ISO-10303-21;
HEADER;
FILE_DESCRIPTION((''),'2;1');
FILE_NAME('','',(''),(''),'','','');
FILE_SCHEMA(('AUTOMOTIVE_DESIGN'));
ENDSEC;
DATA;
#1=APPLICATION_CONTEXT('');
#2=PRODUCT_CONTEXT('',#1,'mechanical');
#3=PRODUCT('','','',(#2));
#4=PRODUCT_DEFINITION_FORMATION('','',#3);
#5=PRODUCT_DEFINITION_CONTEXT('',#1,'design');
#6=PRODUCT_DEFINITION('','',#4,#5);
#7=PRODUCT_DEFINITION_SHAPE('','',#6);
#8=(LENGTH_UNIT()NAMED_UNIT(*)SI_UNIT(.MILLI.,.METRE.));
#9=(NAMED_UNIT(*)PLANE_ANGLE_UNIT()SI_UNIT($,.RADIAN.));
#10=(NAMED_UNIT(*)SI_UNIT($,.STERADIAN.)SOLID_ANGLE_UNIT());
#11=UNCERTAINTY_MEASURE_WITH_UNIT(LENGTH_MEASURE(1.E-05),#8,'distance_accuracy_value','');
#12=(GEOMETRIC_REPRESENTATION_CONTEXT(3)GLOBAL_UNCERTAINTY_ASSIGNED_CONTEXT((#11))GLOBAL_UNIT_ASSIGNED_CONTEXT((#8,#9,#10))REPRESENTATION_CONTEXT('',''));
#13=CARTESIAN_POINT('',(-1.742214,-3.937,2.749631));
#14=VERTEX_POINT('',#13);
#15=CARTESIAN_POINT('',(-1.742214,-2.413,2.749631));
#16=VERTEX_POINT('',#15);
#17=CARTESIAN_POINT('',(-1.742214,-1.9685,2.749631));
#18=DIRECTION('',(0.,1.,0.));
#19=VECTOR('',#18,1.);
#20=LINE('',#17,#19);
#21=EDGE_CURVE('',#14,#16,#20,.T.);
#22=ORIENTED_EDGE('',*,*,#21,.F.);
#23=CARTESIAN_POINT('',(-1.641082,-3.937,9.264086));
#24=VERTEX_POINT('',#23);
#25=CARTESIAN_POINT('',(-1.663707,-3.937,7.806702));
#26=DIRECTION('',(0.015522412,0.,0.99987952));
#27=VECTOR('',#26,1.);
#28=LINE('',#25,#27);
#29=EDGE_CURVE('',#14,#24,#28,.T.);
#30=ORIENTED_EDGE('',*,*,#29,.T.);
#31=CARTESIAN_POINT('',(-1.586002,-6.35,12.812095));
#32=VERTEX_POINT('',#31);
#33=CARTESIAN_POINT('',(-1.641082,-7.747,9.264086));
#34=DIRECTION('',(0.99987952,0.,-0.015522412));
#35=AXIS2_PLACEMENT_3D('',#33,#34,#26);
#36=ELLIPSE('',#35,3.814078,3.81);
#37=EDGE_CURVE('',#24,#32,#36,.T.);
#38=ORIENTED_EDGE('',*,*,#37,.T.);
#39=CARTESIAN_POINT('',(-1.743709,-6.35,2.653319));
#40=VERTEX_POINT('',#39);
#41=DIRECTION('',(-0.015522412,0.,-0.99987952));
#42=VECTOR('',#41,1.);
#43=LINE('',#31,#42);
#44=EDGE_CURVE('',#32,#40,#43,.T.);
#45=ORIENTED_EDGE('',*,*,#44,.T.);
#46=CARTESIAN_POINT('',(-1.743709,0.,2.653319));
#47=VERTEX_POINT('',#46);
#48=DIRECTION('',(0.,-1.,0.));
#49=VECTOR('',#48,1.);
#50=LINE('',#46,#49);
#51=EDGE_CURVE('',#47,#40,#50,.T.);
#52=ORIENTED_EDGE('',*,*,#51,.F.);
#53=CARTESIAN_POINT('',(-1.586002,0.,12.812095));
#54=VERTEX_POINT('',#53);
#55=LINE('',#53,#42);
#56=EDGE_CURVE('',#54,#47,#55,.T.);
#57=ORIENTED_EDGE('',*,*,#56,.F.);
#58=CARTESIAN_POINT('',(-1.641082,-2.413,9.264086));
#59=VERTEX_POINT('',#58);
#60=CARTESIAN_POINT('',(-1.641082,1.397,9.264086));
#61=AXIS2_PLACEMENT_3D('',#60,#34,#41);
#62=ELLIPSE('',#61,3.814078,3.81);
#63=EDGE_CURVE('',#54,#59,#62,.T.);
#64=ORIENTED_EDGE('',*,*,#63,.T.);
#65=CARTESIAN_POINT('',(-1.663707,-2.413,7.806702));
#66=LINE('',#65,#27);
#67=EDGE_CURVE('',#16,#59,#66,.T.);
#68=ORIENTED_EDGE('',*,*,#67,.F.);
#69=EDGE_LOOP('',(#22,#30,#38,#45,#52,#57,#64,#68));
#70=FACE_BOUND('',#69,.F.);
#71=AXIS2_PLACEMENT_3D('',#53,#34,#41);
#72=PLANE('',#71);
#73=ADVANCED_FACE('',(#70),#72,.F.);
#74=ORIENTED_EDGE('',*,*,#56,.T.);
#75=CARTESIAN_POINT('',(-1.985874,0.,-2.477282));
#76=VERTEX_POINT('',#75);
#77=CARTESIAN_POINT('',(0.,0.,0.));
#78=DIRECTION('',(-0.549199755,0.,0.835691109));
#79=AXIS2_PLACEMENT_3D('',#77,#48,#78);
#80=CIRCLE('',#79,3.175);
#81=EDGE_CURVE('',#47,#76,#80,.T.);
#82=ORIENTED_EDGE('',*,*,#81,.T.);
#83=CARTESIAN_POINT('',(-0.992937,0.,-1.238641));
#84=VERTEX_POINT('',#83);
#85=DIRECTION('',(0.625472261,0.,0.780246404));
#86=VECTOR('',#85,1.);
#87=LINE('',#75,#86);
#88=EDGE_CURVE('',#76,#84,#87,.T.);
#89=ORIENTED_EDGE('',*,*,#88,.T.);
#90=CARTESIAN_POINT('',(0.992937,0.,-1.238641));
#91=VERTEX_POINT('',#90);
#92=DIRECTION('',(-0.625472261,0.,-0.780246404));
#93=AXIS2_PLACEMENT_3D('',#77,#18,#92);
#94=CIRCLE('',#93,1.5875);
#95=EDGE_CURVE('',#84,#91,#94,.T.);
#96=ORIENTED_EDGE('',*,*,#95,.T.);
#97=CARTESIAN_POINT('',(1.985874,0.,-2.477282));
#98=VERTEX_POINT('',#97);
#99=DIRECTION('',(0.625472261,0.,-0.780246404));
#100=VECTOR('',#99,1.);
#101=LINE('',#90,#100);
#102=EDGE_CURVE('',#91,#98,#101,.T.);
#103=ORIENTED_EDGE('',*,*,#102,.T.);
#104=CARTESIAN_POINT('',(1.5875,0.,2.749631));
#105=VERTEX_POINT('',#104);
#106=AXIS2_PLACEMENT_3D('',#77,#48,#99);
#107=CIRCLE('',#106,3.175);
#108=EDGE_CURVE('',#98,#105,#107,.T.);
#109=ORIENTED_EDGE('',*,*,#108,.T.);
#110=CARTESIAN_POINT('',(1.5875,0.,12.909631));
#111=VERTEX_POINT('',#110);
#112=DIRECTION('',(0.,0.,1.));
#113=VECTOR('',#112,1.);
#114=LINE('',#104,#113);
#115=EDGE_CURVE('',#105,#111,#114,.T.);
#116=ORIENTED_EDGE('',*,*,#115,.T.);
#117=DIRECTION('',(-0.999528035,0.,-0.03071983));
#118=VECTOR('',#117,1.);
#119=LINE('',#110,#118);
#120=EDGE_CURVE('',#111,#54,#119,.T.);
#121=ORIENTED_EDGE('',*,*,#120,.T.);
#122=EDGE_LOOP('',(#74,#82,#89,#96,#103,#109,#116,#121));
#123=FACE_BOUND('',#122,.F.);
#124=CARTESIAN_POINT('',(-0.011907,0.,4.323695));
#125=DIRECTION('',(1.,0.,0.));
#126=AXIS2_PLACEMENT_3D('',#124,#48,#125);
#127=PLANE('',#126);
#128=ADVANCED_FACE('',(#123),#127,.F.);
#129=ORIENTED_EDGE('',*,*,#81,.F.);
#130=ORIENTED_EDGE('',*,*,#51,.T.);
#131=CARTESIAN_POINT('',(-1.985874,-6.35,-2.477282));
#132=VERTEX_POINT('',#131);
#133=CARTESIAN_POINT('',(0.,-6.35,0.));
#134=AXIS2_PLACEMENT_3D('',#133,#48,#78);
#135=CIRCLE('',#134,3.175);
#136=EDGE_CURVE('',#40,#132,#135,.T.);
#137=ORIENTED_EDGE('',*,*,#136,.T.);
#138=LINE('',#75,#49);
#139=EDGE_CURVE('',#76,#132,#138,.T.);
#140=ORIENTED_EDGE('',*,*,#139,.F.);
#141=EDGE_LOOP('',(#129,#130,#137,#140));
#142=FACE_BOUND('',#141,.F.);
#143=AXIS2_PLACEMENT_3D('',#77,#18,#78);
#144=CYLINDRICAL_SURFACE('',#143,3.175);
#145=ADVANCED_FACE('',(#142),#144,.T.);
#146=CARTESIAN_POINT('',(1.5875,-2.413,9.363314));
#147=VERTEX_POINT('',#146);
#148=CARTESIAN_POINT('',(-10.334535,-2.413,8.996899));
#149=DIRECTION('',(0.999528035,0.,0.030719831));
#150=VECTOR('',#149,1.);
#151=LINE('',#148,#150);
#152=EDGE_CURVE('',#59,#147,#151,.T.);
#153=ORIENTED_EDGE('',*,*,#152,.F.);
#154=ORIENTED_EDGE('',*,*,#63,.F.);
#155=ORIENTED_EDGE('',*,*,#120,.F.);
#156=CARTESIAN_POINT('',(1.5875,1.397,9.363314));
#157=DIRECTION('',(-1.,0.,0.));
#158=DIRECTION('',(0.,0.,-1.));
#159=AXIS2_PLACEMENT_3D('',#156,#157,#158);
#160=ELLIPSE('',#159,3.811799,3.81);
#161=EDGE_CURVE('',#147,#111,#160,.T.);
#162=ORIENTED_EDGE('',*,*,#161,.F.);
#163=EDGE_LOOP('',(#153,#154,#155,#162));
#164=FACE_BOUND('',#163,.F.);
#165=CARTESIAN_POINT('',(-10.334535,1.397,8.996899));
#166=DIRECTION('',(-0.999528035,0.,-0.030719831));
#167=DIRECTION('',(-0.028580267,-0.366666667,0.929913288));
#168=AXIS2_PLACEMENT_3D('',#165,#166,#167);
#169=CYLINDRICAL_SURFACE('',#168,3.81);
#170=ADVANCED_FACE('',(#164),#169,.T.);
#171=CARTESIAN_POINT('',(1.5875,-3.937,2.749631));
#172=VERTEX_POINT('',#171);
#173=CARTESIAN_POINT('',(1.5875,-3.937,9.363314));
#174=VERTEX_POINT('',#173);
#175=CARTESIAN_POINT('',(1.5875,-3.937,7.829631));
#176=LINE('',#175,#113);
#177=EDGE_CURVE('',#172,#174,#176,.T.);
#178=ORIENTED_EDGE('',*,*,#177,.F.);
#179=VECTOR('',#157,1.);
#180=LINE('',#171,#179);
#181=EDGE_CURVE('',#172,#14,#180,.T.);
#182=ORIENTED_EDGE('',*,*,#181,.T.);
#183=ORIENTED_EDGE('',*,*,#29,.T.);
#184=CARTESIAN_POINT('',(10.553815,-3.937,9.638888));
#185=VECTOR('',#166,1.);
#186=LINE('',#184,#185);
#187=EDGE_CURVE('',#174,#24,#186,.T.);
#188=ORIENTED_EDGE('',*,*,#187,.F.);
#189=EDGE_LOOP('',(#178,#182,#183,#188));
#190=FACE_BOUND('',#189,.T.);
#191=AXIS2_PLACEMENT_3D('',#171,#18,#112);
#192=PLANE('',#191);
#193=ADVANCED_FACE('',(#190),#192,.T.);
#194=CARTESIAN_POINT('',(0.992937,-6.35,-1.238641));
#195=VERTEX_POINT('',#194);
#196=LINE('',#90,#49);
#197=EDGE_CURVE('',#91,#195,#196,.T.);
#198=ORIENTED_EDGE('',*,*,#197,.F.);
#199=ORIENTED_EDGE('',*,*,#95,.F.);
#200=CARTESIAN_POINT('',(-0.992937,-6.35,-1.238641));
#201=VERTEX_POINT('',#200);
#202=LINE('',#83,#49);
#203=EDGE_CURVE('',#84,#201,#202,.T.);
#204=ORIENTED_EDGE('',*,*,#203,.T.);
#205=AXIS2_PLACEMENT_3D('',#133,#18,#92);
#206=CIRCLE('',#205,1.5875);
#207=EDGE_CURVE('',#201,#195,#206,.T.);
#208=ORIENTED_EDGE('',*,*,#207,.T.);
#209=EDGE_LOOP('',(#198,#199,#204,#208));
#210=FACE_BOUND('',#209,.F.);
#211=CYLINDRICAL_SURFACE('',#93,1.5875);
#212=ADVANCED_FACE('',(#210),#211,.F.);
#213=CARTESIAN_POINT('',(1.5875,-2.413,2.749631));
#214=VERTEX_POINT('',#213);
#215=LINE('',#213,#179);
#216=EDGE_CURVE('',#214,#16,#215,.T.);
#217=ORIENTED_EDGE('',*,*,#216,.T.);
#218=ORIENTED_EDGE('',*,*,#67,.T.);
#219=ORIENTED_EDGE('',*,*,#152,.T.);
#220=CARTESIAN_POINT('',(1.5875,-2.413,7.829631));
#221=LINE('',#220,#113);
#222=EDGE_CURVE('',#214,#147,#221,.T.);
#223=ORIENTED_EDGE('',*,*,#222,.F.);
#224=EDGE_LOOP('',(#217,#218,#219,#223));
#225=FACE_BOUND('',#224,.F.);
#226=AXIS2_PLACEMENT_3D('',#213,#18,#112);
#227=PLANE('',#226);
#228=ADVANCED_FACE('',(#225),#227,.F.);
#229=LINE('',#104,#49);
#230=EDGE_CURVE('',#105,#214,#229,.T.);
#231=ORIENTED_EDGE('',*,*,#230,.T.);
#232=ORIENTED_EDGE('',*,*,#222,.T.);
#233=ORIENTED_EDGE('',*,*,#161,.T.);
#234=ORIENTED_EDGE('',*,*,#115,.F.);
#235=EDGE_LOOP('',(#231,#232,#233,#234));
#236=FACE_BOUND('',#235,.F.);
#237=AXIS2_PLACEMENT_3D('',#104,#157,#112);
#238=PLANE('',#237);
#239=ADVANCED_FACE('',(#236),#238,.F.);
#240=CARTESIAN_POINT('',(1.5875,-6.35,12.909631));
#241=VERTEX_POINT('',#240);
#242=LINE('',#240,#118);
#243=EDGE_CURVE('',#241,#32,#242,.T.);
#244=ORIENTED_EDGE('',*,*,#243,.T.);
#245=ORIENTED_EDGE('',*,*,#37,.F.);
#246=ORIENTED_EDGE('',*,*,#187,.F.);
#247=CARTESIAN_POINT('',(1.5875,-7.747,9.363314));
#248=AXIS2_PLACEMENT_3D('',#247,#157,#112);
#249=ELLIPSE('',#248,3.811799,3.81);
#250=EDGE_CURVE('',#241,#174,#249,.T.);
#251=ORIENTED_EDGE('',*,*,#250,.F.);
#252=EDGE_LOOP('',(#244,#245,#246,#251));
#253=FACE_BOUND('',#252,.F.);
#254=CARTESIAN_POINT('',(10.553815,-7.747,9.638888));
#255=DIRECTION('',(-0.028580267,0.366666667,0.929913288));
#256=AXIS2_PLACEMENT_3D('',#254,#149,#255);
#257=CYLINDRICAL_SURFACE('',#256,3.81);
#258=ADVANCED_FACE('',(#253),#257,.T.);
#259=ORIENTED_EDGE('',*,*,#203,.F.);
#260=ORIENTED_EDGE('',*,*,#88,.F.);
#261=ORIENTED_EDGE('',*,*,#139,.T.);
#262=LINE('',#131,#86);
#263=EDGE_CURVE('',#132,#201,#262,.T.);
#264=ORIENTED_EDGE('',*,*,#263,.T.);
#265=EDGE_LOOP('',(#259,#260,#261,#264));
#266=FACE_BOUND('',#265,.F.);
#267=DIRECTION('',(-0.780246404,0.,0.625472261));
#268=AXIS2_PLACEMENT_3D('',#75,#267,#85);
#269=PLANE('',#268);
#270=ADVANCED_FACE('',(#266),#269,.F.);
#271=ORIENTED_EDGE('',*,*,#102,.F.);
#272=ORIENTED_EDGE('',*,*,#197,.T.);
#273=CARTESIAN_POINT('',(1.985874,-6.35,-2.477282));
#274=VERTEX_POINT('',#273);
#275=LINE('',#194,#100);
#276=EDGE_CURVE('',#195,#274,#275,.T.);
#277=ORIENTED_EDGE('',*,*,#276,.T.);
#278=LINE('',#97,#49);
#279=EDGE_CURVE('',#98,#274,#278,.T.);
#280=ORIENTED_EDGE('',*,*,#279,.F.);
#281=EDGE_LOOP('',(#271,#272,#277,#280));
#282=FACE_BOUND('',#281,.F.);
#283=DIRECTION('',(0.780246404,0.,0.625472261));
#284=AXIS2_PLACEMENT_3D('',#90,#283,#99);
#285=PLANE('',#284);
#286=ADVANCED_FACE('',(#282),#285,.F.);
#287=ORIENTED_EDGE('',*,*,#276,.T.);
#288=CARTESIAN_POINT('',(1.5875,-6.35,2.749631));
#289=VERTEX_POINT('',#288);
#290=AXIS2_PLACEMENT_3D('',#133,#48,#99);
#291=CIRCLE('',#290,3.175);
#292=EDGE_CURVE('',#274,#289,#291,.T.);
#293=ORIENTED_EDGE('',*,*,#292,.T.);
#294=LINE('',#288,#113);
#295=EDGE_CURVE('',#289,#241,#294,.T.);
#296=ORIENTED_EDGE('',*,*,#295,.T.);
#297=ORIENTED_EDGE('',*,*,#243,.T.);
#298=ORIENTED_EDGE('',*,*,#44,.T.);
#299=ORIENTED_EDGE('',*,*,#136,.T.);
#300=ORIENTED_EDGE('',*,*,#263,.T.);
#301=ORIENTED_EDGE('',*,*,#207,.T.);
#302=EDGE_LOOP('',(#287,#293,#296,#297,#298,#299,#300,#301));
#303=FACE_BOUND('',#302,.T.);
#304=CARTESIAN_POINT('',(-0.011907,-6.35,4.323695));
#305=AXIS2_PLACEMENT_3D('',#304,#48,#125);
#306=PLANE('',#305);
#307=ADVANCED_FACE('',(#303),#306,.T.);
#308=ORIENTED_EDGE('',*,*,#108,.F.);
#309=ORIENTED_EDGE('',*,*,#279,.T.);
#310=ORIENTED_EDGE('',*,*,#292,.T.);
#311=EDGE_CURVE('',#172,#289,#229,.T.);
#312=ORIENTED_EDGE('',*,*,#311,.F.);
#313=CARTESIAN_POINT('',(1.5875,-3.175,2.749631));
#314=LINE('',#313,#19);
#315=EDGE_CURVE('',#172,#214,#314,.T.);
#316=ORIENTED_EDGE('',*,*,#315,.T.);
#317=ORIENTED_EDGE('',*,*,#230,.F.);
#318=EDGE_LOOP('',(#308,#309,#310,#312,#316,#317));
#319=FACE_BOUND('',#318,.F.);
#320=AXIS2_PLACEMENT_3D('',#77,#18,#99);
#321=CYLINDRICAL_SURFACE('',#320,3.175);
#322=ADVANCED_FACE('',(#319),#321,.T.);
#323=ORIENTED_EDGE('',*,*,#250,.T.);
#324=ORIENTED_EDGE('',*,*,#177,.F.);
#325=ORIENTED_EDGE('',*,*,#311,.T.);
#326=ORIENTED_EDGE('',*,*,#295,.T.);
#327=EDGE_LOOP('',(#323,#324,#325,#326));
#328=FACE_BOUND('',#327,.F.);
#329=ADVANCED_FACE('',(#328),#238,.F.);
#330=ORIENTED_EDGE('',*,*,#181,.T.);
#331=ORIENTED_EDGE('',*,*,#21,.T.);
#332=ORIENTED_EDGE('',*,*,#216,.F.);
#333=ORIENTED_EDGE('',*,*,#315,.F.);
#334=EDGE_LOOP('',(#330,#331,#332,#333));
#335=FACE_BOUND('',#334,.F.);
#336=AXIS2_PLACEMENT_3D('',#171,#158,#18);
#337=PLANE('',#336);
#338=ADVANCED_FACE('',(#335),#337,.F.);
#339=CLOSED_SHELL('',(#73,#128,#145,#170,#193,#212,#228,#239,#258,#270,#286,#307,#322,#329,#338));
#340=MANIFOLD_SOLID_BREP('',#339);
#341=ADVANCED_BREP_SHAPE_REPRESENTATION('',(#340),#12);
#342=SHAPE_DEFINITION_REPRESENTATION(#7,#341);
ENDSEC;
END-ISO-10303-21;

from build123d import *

# Parameters (mm, degrees)
F1_DEPTH    = 6.35
F2_W        = 1.524
F2_H        = 10.16
F3_DEPTH    = 25.4
F4_T1_DEPTH = 20.8982128859
F5_T1_DEPTH = 20.8982128859


# Not quite as in the source:
# - a fillet or chamfer that OpenCascade refuses, or shapes differently, is made with other operations: its cross-section is extruded or revolved along the edge and cut away or added


with BuildPart() as f1:
    # F0 (on Front) → F1 (new body)
    with BuildSketch(Plane.XZ):
        with BuildLine():
            Line((0.9929372138, -1.2386411666), (1.9858744275, -2.4772823331))
            ThreePointArc((1.9858744275, -2.4772823331), (3.1658183857, 0.2412860305), (1.5875, 2.749630657))
            Line((1.5875, 2.749630657), (1.5875, 12.909630657))
            Line((1.5875, 12.909630657), (-1.58600151, 12.8120951952))
            Line((-1.58600151, 12.8120951952), (-1.7437092207, 2.653319271))
            ThreePointArc((-1.7437092207, 2.653319271), (-3.1714691788, 0.1496938466), (-1.9858744275, -2.4772823331))
            Line((-1.9858744275, -2.4772823331), (-0.9929372138, -1.2386411666))
            ThreePointArc((-0.9929372138, -1.2386411666), (0, 1.5875), (0.9929372138, -1.2386411666))
        make_face()
    extrude(amount=F1_DEPTH)

    # F2 (on face) → F3 (cut)
    with BuildSketch(Plane.YZ.offset(1.5875)):
        with Locations((-3.175, 7.829630657)):
            Rectangle(F2_W, F2_H)
    extrude(amount=-F3_DEPTH, mode=Mode.SUBTRACT)

    # F4: fillet of radius 3.81 on 1 edges, made by hand

    # F4_s2 → F4_t1 (cut)
    with BuildSketch(Plane(origin=(10.839820428, 0, 0.3331546837), x_dir=(0, 1, 0), z_dir=(-0.9995280346, 0, -0.0307198305))):
        with BuildLine():
            ThreePointArc((-6.35, -12.8547700275), (-4.597502421, -11.4541342134), (-3.937, -9.3101274503))
            Line((-3.937, -9.3101274503), (-3.937, -12.8547700275))
            Line((-3.937, -12.8547700275), (-6.35, -12.8547700275))
        make_face()
    extrude(amount=F4_T1_DEPTH, mode=Mode.SUBTRACT)

    # F5: fillet of radius 3.81 on 1 edges, made by hand

    # F5_s2 → F5_t1 (cut)
    with BuildSketch(Plane(origin=(-10.0485292251, 0, -0.308834874), x_dir=(0, 1, 0), z_dir=(0.9995280346, 0, 0.0307198305))):
        with BuildLine():
            ThreePointArc((0, 12.8547700275), (-1.752497579, 11.4541342134), (-2.413, 9.3101274503))
            Line((-2.413, 9.3101274503), (-2.413, 12.8547700275))
            Line((-2.413, 12.8547700275), (0, 12.8547700275))
        make_face()
    extrude(amount=F5_T1_DEPTH, mode=Mode.SUBTRACT)


solid = f1.part
